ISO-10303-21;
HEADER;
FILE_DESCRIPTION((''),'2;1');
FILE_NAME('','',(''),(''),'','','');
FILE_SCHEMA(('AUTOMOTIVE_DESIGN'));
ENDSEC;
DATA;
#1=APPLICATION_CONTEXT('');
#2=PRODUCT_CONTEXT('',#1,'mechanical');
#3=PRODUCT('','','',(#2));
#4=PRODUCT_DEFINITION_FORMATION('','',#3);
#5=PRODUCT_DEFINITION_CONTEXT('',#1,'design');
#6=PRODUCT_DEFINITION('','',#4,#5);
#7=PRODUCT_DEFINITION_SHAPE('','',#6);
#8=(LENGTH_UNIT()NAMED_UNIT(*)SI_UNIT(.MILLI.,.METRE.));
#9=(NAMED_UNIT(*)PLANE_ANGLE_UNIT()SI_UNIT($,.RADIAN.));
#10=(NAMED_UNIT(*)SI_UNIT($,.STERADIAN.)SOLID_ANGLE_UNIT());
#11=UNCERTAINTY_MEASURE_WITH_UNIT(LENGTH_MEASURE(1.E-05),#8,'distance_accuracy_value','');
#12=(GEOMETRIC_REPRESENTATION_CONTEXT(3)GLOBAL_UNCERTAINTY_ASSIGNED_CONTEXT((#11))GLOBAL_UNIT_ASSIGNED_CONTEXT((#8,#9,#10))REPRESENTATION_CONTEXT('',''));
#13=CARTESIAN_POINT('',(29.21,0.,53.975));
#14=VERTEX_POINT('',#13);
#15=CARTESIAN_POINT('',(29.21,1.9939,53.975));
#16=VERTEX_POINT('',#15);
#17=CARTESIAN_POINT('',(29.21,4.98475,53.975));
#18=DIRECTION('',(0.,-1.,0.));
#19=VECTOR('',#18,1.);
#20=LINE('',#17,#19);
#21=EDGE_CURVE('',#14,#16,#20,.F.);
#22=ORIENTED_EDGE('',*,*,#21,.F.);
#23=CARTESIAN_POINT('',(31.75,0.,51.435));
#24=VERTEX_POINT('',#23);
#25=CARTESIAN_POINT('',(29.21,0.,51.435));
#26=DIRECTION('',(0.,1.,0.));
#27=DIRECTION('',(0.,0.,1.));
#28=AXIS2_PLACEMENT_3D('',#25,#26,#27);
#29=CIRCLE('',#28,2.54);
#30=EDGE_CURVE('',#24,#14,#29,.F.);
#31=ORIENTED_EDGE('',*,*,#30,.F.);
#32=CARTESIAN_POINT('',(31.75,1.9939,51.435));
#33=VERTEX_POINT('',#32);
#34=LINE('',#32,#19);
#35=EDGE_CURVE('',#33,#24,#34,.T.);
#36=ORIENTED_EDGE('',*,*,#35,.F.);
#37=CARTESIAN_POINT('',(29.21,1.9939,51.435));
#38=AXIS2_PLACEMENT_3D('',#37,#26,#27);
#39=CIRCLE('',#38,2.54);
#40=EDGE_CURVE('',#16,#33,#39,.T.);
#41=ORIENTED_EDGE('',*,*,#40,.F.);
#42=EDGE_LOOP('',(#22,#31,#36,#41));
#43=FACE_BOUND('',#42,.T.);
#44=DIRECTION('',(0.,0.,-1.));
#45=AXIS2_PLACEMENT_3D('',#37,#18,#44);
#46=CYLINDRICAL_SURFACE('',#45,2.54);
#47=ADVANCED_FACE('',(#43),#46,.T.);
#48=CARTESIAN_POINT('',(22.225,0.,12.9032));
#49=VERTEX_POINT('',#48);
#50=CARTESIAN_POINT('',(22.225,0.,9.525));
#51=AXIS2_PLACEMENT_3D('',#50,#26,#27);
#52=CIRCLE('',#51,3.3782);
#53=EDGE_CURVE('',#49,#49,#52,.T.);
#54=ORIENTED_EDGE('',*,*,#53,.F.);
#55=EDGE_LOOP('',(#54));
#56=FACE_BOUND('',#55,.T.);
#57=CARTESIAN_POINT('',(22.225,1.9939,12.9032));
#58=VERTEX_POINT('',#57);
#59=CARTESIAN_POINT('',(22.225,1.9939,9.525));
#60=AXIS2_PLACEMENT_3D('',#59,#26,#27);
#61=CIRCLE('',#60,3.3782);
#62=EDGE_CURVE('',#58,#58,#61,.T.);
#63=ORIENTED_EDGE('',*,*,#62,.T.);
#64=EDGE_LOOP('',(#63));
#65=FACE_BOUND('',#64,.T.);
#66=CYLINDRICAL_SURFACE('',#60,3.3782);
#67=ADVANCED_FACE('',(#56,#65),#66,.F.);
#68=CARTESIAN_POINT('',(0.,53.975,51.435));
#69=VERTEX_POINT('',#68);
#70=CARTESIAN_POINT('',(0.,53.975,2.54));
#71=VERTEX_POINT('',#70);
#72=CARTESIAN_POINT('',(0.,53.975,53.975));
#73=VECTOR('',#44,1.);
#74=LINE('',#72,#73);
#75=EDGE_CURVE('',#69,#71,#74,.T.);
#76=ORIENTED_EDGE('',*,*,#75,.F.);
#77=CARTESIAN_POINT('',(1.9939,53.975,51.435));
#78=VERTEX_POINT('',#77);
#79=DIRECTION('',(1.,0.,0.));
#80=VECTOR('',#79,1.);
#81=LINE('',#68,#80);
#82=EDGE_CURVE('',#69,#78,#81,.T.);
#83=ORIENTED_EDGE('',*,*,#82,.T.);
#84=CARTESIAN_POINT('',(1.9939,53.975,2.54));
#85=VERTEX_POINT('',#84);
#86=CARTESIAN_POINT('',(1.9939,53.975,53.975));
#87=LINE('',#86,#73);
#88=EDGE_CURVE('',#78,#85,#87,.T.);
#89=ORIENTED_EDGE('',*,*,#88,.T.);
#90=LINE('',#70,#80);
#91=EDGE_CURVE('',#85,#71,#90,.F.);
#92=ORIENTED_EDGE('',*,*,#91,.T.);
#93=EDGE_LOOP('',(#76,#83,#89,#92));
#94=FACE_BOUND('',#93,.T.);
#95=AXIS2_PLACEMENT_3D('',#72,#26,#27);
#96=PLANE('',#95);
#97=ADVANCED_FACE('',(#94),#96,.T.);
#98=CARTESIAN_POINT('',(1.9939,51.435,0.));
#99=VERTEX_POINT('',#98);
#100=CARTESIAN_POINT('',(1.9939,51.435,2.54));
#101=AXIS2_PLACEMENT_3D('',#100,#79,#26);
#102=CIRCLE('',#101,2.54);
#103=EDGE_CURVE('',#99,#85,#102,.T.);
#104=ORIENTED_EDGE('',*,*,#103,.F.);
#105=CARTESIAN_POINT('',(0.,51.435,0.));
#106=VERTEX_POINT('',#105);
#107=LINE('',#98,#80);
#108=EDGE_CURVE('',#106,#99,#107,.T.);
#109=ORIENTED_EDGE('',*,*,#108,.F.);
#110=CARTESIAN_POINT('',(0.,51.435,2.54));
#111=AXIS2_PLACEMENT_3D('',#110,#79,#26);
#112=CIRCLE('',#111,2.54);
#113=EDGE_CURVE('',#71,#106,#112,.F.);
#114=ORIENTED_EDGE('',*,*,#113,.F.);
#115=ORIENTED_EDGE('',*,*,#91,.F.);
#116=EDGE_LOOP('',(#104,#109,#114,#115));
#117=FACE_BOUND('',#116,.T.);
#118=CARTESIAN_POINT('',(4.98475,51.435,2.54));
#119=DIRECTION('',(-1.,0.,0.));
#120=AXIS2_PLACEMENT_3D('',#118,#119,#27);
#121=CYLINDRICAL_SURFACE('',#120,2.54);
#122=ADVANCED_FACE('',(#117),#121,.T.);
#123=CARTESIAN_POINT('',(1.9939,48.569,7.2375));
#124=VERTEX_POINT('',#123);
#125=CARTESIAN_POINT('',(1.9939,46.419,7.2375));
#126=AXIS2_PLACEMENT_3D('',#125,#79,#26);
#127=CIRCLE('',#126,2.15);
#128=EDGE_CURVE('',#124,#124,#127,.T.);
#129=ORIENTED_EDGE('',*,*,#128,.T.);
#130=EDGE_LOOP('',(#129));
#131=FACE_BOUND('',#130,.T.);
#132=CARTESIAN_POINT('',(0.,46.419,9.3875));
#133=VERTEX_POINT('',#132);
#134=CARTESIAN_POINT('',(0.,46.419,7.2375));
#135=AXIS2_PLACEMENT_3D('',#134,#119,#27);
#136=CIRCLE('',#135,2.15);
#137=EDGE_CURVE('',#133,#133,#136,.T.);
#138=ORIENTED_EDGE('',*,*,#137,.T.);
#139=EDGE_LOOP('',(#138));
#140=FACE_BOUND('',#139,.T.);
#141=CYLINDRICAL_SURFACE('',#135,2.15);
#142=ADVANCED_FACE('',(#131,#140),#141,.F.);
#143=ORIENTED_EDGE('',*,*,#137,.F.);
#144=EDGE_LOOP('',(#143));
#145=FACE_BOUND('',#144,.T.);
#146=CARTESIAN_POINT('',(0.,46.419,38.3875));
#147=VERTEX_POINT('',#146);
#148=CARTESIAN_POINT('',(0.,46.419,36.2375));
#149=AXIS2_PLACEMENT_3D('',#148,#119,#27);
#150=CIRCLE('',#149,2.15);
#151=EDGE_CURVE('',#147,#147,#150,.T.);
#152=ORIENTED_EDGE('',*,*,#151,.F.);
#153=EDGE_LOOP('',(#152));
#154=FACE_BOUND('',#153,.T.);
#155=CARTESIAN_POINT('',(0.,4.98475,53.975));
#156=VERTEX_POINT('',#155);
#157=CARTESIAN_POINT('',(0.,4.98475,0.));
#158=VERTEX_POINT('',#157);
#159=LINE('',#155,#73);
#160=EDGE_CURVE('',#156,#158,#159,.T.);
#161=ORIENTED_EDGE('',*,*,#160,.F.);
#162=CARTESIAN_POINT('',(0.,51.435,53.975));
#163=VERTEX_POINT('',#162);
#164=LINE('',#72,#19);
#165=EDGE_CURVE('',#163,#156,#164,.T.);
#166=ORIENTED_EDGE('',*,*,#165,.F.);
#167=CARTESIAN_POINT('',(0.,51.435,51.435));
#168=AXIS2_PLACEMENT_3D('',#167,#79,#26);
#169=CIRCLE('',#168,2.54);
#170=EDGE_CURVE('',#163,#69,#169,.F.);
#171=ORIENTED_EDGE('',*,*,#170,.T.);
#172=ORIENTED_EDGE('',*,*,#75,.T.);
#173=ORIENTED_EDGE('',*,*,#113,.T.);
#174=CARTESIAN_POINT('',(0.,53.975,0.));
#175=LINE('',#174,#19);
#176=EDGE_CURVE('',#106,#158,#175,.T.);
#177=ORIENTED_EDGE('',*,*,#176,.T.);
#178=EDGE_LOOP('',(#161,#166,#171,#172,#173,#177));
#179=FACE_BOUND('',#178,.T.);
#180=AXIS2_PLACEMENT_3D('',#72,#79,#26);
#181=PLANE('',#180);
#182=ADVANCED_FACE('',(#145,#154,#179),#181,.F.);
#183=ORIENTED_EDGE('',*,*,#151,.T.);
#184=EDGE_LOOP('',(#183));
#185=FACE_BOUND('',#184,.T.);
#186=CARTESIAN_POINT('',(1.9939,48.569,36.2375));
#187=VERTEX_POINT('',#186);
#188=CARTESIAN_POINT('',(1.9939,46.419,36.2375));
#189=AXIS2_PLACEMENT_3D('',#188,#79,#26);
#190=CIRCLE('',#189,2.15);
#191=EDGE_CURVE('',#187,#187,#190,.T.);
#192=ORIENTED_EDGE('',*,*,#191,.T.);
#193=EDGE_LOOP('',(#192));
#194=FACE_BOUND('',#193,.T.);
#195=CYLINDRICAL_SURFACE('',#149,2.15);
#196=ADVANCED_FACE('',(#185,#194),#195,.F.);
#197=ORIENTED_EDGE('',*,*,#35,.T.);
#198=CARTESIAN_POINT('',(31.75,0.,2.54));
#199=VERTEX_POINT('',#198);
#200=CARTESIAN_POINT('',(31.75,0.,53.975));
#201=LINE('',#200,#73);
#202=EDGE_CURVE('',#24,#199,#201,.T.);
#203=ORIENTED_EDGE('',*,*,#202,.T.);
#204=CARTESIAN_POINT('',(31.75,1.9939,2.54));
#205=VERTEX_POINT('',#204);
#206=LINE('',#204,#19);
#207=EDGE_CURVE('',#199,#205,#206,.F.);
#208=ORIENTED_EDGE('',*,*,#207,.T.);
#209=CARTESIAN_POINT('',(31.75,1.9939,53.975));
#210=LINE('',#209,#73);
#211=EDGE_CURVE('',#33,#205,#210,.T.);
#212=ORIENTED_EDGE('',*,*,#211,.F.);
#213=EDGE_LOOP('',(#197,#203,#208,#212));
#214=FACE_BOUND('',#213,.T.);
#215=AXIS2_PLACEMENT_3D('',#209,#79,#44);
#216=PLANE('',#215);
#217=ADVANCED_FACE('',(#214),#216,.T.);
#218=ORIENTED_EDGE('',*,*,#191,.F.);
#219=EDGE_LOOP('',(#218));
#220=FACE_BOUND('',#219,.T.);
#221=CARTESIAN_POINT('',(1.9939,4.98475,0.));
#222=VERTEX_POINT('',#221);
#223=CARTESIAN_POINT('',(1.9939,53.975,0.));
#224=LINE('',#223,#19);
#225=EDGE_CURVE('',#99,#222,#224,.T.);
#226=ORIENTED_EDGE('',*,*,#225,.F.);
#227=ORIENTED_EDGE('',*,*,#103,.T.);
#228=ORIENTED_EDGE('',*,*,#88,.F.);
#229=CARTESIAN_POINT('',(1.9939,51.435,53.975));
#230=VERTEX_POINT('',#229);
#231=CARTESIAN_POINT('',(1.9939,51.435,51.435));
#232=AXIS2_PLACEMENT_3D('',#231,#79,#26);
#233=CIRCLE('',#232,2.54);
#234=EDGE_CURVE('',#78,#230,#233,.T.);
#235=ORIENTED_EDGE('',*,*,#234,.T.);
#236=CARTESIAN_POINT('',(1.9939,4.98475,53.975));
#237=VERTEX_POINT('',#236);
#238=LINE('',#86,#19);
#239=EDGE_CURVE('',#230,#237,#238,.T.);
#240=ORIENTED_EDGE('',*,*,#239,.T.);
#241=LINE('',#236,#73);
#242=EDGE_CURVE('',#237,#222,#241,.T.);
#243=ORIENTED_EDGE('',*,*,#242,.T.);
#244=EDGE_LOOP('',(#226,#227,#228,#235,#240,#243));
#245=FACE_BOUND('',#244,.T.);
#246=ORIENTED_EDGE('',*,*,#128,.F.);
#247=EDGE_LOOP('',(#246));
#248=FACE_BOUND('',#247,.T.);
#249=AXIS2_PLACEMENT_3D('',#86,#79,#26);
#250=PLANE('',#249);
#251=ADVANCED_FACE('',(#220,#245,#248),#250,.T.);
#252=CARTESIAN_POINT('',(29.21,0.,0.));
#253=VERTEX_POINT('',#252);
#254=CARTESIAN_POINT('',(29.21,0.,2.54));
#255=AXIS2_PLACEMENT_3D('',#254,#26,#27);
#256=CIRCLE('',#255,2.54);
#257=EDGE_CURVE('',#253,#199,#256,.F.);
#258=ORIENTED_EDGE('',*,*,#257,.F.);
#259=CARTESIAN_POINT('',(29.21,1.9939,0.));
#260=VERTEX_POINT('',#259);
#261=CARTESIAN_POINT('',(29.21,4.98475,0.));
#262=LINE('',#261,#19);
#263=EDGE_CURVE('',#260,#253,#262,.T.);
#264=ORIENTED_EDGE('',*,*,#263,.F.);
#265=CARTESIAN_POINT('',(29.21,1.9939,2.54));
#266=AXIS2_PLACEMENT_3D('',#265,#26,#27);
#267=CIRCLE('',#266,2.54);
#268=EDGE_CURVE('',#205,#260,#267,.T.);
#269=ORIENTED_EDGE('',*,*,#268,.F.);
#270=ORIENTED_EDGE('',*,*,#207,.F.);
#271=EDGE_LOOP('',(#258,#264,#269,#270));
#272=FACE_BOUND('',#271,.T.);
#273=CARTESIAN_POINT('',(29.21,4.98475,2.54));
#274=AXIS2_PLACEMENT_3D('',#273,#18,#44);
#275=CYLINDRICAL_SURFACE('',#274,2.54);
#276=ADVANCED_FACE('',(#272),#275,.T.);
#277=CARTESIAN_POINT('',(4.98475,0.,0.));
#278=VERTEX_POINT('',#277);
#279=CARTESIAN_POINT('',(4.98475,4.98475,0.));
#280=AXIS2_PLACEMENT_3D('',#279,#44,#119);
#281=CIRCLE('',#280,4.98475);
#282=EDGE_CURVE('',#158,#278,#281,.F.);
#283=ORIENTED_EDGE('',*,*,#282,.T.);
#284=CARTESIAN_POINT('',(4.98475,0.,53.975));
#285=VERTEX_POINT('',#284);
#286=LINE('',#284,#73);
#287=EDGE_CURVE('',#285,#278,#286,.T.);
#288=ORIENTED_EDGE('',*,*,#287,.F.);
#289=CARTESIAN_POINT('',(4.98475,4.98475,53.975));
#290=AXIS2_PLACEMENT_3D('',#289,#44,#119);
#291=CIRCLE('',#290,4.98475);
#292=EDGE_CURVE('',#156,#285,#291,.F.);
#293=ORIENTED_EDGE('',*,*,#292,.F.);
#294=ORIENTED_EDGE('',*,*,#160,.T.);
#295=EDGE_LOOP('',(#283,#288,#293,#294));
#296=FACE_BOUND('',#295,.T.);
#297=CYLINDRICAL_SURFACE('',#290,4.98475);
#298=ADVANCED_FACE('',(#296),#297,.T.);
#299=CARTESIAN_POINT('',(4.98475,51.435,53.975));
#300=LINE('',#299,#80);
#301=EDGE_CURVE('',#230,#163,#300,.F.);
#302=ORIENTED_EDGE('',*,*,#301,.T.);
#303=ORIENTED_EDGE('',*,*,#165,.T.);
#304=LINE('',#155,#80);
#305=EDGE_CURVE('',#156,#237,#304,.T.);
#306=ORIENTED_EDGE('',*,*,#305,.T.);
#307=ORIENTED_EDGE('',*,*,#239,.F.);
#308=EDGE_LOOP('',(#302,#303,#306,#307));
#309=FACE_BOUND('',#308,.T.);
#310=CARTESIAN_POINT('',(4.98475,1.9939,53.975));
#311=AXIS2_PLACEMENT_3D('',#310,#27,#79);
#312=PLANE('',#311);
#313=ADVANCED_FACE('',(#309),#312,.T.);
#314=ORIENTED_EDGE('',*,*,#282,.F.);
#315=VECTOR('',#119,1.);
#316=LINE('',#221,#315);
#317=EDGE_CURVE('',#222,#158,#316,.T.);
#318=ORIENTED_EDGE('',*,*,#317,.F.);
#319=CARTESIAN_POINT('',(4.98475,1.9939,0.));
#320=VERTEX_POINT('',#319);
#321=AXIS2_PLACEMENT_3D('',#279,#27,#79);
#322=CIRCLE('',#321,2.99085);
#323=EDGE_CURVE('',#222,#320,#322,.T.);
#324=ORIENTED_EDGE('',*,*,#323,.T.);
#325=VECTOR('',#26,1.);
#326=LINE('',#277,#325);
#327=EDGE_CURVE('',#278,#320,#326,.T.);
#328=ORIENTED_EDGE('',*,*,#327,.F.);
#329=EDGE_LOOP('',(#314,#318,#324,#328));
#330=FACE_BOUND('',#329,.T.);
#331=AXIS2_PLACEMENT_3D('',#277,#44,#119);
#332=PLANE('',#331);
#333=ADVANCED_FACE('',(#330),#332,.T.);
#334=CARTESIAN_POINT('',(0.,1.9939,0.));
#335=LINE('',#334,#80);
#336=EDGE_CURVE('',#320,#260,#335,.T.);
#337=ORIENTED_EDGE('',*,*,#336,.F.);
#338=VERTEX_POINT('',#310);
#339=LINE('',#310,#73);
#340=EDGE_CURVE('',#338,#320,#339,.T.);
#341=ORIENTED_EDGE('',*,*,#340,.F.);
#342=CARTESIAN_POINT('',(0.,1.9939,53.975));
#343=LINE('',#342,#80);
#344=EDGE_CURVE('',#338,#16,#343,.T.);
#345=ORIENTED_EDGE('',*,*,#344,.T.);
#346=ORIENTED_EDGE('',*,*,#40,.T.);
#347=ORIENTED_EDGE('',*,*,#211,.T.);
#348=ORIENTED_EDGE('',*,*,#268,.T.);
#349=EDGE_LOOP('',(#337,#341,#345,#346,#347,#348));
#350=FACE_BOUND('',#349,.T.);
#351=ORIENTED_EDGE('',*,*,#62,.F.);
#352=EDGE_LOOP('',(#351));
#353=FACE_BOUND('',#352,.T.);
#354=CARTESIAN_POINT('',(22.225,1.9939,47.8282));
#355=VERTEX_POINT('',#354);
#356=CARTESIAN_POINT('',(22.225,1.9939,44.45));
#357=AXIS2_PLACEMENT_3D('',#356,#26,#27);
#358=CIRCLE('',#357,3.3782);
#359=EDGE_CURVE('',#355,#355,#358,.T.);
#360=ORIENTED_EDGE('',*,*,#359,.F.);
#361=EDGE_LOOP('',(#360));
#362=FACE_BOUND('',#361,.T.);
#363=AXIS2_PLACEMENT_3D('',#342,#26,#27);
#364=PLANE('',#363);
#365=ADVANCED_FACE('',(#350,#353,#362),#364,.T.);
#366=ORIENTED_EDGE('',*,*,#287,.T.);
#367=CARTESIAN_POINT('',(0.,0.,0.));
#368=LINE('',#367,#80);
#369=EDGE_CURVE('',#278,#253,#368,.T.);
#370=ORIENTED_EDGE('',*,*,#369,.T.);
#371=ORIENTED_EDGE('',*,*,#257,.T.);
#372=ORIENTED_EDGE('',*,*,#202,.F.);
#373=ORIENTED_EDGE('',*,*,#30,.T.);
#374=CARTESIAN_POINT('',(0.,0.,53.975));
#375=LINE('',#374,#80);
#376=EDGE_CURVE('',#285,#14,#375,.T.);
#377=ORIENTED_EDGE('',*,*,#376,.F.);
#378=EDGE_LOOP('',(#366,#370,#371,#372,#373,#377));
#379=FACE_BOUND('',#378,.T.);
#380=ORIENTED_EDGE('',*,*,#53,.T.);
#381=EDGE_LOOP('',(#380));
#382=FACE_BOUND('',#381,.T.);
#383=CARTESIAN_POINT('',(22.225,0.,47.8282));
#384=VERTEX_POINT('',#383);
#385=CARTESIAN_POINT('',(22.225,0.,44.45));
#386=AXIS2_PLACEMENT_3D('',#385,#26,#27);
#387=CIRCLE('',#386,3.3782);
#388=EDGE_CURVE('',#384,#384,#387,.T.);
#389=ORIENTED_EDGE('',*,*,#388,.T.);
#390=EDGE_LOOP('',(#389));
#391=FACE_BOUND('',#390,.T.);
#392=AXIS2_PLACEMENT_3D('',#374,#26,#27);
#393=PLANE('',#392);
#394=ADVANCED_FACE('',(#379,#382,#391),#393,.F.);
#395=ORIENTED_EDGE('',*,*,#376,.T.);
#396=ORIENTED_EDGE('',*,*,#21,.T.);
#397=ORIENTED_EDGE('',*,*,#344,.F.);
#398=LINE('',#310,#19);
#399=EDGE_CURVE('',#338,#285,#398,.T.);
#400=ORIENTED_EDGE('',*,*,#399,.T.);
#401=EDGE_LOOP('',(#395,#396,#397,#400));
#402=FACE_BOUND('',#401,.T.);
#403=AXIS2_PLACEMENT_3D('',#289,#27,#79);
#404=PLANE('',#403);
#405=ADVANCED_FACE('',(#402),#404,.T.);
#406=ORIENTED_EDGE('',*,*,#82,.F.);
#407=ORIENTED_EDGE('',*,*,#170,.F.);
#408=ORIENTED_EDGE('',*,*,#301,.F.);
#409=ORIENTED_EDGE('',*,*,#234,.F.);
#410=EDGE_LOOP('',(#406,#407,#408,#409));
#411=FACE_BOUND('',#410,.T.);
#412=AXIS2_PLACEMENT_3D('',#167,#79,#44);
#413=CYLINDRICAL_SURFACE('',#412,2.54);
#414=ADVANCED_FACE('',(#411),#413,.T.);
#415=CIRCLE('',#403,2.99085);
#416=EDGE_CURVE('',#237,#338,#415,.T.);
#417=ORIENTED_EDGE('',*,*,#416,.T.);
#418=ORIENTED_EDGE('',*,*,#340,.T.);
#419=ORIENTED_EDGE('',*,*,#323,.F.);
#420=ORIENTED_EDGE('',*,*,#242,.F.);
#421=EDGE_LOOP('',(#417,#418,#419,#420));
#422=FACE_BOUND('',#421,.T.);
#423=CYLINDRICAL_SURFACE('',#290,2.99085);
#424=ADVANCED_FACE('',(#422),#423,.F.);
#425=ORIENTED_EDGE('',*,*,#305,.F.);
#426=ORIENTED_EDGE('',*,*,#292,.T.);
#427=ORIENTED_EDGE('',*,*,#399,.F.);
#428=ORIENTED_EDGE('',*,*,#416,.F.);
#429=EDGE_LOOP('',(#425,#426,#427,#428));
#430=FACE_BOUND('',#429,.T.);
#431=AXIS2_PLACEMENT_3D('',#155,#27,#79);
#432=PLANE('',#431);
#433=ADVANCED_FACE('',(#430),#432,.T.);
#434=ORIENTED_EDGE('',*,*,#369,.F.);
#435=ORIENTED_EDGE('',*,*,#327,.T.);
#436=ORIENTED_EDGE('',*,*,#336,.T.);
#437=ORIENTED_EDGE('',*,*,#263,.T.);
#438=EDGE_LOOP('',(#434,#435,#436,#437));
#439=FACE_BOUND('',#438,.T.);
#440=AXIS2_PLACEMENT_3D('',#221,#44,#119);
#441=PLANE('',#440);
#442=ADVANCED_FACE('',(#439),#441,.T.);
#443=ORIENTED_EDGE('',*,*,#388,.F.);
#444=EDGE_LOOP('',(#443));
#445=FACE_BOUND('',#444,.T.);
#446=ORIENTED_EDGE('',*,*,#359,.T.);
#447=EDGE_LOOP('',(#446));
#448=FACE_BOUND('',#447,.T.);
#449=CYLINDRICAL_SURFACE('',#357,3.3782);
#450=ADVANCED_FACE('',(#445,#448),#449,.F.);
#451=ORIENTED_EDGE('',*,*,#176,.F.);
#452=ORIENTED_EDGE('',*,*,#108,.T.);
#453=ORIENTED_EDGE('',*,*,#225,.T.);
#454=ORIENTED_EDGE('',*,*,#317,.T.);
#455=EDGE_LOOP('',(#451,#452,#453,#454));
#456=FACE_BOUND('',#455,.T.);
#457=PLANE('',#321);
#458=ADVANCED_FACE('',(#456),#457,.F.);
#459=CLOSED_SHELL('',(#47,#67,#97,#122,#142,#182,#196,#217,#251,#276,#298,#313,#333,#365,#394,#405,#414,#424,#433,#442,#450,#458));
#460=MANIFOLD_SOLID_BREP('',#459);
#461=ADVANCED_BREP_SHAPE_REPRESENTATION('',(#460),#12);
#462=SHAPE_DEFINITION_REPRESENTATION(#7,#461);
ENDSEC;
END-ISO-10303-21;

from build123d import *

# Parameters (mm, degrees)
BASE_FLANGE1_DEPTH      = 53.975
M4_CLEARANCE_HOLE1_D    = 4.3
F_1_4_CLEARANCE_HOLE1_D = 6.7564
FILLET1_R               = 2.54


# Read off the part's stored shape, not the designer's step: Base-Flange1
with BuildPart() as part:
    # Base-Flange1 outline → Base-Flange1 (new body)
    with BuildSketch(Plane.XY):
        with BuildLine():
            Line((4.98475, 0), (31.75, 0))
            Line((31.75, 0), (31.75, 1.9939))
            Line((31.75, 1.9939), (4.98475, 1.9939))
            ThreePointArc((4.98475, 1.9939), (2.869899683, 2.869899683), (1.9939, 4.98475))
            Line((1.9939, 4.98475), (1.9939, 53.975))
            Line((1.9939, 53.975), (0, 53.975))
            Line((0, 53.975), (0, 4.98475))
            ThreePointArc((0, 4.98475), (1.459999472, 1.459999472), (4.98475, 0))
        make_face()
    extrude(amount=BASE_FLANGE1_DEPTH)

    # M4 Clearance Hole1 (through all)
    with Locations(Plane.ZY):
        with Locations((36.2375, 46.419), (7.237499922, 46.419)):
            Hole(M4_CLEARANCE_HOLE1_D / 2)

    # 1/4 Clearance Hole1 (through all)
    with Locations(Plane(origin=(0, 1.9939, 0), x_dir=(1, 0, 0), z_dir=(0, 1, 0))):
        with Locations((22.225, -44.45), (22.225, -9.525)):
            Hole(F_1_4_CLEARANCE_HOLE1_D / 2)

    # Fillet1
    fillet1_edges = [part.edges().sort_by_distance(p)[0] for p in [
        (0.99695, 53.975, 53.975),
        (0.99695, 53.975, 0),
        (31.75, 0.99695, 53.975),
        (31.75, 0.99695, 0),
    ]]
    fillet(fillet1_edges, radius=FILLET1_R)


solid = part.part
